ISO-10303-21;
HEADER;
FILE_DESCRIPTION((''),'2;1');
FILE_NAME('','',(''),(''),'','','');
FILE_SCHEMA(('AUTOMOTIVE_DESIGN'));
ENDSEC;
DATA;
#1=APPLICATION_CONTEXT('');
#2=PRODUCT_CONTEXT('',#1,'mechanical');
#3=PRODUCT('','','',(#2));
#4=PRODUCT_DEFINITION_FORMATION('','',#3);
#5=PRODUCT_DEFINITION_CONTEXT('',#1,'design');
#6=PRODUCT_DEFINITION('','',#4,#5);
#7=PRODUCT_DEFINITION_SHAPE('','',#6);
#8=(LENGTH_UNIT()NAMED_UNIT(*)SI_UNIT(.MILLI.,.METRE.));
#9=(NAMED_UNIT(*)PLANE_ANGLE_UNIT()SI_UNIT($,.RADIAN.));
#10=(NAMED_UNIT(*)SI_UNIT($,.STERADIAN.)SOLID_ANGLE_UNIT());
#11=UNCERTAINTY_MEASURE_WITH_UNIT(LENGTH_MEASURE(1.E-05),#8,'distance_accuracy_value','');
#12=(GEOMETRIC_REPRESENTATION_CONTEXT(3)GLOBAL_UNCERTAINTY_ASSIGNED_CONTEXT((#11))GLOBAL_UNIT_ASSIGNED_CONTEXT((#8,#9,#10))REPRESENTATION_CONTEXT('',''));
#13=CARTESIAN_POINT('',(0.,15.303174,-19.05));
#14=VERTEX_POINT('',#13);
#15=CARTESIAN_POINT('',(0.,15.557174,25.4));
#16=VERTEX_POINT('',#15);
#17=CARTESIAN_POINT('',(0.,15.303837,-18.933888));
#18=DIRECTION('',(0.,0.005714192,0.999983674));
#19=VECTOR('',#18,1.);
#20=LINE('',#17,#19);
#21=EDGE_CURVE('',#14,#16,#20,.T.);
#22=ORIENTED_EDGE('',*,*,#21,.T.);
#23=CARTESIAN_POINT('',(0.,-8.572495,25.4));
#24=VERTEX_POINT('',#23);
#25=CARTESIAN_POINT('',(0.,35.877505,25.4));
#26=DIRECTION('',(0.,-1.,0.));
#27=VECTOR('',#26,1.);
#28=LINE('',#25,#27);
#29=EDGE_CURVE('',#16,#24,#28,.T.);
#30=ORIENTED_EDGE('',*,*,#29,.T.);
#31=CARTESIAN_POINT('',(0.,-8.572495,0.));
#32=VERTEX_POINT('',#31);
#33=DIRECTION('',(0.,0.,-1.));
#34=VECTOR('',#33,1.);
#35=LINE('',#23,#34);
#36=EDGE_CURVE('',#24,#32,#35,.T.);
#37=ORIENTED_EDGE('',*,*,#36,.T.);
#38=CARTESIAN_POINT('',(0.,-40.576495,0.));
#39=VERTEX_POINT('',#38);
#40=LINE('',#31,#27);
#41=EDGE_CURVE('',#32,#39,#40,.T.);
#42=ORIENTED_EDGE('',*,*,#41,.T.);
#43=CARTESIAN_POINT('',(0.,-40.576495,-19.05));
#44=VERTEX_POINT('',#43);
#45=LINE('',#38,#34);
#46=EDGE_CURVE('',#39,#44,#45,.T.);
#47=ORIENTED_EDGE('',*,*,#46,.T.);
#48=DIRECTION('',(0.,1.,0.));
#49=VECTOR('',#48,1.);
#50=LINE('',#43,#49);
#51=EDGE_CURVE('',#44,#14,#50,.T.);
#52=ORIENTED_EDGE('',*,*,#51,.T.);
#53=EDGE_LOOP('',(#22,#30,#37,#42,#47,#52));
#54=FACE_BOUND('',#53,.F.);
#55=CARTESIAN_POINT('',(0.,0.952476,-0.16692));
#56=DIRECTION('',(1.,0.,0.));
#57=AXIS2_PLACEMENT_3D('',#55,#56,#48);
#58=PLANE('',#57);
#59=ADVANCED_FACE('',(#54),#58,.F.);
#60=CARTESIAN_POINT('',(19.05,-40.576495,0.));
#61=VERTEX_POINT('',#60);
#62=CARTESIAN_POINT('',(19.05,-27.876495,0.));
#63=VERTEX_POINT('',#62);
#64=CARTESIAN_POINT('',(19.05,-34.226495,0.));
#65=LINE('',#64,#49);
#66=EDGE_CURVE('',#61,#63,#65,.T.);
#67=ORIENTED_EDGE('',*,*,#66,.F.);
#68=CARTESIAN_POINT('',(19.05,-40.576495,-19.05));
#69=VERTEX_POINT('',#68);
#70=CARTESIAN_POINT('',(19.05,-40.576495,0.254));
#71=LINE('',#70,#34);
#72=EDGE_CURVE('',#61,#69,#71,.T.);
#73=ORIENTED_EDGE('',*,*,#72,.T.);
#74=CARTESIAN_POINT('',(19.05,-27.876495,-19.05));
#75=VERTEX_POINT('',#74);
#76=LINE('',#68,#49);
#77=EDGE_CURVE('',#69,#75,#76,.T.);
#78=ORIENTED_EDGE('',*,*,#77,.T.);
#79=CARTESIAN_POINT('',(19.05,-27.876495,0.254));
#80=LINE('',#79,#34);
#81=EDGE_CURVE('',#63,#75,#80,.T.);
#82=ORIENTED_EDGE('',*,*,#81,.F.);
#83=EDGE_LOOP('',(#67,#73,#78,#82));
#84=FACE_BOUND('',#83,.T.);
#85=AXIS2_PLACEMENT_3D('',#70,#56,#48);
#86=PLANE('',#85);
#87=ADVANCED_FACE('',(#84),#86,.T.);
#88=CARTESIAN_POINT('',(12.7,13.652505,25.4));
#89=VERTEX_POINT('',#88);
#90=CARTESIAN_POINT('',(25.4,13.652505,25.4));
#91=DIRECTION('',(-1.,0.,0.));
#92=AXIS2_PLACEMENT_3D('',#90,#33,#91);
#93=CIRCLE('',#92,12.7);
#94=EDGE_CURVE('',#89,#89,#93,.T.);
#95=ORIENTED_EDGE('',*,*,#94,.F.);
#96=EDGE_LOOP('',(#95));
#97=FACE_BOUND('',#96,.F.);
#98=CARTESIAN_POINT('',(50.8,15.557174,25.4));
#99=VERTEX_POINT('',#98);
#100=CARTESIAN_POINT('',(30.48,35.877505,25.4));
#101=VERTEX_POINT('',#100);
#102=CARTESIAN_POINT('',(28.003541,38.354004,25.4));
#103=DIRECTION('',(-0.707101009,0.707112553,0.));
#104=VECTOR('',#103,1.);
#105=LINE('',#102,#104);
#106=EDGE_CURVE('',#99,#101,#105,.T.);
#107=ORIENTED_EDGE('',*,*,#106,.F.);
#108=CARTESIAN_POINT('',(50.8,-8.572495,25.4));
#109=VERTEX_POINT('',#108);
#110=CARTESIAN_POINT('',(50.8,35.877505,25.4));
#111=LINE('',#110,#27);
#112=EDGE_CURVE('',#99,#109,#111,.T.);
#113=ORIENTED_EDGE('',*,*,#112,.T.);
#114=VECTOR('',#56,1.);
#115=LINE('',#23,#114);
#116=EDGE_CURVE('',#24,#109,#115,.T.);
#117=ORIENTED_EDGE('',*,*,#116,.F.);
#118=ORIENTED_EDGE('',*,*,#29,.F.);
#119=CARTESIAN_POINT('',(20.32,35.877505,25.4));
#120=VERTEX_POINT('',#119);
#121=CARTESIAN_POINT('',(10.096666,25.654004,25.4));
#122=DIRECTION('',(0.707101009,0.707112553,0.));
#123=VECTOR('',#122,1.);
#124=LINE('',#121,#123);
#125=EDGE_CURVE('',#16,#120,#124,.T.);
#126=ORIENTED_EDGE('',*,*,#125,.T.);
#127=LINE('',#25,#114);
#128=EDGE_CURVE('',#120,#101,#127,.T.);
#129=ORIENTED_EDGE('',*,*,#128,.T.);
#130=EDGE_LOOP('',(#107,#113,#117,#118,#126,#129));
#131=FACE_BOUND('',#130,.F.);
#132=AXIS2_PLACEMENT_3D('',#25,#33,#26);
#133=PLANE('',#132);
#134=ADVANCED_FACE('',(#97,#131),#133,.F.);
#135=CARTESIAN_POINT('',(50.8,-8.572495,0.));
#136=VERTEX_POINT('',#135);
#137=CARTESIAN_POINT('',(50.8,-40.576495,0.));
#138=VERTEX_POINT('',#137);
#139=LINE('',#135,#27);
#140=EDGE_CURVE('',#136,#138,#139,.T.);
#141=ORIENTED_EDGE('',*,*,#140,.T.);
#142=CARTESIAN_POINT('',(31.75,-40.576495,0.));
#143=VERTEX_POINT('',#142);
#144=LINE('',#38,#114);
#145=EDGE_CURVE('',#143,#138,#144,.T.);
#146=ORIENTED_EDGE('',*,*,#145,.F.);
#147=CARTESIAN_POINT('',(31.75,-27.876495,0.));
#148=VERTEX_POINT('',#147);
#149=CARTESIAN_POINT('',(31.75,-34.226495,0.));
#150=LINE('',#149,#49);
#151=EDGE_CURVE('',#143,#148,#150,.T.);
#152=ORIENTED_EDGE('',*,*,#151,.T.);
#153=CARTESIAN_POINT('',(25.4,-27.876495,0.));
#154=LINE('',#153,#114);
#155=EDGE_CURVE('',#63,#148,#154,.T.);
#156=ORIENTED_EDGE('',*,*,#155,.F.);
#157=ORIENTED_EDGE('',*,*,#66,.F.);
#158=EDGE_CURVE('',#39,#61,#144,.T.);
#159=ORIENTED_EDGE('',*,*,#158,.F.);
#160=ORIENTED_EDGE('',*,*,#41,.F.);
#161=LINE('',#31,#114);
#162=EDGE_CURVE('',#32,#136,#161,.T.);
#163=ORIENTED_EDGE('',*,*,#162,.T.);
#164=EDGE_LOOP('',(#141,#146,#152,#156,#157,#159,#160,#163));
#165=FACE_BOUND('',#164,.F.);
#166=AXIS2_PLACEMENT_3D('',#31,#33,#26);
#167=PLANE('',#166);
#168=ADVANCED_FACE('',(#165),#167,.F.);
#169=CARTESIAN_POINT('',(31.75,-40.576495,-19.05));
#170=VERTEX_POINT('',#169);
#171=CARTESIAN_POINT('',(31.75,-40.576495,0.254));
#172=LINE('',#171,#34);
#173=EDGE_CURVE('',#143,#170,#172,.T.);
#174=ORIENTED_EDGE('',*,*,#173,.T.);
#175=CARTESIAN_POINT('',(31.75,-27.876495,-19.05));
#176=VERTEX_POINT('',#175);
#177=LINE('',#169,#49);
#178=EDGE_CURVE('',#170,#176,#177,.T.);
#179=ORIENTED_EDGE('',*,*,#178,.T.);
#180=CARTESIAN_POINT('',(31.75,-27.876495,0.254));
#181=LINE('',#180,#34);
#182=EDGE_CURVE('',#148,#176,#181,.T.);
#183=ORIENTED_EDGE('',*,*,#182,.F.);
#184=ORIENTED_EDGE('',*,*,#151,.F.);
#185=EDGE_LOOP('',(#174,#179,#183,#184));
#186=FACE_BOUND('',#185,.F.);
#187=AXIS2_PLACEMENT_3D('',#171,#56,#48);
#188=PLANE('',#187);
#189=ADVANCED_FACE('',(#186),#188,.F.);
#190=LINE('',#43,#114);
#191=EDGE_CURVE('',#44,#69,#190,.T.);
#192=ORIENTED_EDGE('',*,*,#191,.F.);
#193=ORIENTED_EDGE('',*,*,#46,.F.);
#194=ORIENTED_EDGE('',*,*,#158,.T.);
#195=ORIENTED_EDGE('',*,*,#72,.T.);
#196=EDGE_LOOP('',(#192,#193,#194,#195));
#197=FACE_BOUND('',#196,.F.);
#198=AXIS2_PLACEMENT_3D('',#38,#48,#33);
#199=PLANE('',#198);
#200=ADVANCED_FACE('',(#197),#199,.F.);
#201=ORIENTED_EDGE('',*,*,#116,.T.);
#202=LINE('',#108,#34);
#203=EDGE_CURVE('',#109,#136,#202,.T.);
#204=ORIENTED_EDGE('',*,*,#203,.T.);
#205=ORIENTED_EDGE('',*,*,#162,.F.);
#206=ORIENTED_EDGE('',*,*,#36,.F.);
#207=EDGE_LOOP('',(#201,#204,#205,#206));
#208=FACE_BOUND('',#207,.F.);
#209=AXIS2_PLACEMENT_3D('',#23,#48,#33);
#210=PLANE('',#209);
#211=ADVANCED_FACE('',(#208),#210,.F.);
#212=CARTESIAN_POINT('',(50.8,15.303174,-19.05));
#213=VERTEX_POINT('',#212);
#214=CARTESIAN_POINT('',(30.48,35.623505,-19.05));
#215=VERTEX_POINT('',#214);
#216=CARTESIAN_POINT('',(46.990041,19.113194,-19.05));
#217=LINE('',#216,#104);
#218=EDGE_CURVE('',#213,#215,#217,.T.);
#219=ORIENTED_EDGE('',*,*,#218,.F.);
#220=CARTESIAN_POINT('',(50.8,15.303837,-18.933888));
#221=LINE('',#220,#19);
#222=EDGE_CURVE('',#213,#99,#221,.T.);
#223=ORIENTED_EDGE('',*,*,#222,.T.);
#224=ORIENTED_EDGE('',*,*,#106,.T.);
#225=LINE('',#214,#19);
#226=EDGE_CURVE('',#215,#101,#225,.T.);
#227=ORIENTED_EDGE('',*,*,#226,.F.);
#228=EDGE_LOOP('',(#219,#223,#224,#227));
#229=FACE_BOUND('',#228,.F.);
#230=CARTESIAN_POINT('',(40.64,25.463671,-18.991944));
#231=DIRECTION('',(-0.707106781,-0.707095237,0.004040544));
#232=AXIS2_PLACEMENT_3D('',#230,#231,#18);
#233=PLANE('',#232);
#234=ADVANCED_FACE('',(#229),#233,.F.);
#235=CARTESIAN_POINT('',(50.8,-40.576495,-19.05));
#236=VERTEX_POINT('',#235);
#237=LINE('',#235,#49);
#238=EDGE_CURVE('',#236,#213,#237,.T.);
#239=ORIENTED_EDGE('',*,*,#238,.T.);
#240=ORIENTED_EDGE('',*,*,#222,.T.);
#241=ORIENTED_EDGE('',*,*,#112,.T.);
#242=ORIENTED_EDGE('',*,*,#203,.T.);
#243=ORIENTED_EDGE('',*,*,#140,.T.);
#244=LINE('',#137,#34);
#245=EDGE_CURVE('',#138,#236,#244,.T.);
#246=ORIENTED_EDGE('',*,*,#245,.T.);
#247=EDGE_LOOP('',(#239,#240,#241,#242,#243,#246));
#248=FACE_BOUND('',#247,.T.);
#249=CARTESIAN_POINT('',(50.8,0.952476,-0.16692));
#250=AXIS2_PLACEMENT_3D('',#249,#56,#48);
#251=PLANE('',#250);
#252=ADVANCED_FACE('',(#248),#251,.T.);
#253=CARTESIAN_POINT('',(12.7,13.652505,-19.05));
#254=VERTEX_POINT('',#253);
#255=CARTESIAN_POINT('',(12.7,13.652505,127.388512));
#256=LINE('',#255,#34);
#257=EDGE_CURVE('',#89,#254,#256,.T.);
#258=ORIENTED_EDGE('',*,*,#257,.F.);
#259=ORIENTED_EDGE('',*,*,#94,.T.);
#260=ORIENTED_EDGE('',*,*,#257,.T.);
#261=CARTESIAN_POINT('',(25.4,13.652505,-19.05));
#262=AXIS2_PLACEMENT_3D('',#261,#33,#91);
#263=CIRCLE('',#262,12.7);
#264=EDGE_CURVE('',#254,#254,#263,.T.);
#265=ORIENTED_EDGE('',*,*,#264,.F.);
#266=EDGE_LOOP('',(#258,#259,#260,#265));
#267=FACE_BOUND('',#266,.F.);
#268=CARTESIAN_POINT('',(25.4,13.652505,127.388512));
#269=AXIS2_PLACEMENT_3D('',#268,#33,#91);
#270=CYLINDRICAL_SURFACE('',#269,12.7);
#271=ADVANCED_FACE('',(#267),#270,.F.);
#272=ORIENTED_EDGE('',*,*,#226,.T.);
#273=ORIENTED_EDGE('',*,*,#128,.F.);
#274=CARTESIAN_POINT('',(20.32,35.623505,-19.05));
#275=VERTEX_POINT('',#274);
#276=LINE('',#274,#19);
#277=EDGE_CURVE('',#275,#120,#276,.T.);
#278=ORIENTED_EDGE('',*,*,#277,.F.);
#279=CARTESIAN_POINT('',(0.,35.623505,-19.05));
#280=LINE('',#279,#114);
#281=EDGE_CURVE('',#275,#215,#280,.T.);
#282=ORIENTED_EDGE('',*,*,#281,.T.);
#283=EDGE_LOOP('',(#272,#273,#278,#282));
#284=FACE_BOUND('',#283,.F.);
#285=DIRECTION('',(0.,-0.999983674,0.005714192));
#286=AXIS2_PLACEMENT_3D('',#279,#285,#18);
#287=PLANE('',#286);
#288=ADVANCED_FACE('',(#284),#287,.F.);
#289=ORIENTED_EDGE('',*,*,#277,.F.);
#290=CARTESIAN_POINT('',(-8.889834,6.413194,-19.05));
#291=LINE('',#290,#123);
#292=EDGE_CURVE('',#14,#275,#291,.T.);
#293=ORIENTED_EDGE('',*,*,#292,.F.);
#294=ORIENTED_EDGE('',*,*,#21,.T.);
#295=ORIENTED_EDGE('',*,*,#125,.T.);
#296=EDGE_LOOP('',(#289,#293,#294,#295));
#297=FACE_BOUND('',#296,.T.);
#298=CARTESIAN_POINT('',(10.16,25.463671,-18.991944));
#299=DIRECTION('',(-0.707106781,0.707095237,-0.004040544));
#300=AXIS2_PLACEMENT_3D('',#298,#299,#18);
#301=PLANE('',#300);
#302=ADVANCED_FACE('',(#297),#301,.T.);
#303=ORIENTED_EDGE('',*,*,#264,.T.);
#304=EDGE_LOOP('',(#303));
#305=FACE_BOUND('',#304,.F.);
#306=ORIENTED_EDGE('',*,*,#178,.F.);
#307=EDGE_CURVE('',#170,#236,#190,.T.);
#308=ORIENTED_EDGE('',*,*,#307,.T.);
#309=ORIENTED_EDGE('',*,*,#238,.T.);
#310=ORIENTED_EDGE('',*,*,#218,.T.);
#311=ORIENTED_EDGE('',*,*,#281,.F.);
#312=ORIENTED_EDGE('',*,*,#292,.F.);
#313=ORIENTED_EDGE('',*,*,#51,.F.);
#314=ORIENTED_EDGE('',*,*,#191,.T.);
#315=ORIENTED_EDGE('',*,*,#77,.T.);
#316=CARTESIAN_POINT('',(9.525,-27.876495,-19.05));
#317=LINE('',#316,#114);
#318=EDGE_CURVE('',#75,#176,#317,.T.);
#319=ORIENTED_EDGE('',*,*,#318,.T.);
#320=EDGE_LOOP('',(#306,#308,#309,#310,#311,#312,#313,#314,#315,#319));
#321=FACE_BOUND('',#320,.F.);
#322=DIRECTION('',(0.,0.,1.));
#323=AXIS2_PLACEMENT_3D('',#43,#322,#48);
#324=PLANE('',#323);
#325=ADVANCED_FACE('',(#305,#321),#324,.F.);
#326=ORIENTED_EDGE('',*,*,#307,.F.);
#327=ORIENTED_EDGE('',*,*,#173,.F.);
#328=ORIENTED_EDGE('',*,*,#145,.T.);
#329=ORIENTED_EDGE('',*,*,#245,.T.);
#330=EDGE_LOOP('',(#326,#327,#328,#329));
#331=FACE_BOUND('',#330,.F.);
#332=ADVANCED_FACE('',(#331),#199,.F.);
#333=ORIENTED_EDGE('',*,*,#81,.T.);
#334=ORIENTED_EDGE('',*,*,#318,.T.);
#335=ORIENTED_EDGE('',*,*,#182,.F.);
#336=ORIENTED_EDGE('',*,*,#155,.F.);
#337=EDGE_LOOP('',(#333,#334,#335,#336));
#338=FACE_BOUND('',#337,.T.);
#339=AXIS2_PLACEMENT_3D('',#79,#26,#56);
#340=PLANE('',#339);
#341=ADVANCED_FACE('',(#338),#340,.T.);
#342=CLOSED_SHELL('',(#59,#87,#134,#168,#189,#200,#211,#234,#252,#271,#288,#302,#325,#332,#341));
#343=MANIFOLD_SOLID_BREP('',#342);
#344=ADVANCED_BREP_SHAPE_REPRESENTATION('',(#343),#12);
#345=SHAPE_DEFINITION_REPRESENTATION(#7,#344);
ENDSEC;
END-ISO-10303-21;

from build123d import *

# Parameters (mm, degrees)
F1_DEPTH = 50.8
F3_D     = 25.4
F4_SIZE  = 20.32
F5_W     = 12.7
F5_H     = 12.7
F6_DEPTH = 0.254
F7_DEPTH = 35.052


with BuildPart() as f1:
    # F0 (on Right) → F1 (new body)
    with BuildSketch(Plane.YZ):
        Polygon((-24.5744947175, 0), (-40.5764947175, 0), (-40.5764947175, -19.05), (35.6235052825, -19.05), (35.8775052825, 25.4), (-8.5724947175, 25.4), (-8.5724947175, 0), align=None)
    extrude(amount=F1_DEPTH)

    # F3 (through all)
    with Locations(Plane.XY.offset(25.4)):
        with Locations((25.4, 13.6525052825)):
            Hole(F3_D / 2)

    # F4
    f4_edges = [f1.edges().sort_by_distance(p)[0] for p in [
        (0, 35.750505, 3.175),
        (50.8, 35.750505, 3.175),
    ]]
    chamfer(f4_edges, length=F4_SIZE)

    # F5 (on face) → F6 (join)
    with BuildSketch(Plane.XY):
        with Locations((25.4, -34.2264947175)):
            Rectangle(F5_W, F5_H)
    extrude(amount=F6_DEPTH)

    # F7 (cut): a face of the model
    f7_faces = [f1.faces().sort_by_distance(p)[0] for p in [
        (25.4, -34.2264947175, 0.254),
    ]]
    extrude(f7_faces, amount=-F7_DEPTH, mode=Mode.SUBTRACT)


solid = f1.part
